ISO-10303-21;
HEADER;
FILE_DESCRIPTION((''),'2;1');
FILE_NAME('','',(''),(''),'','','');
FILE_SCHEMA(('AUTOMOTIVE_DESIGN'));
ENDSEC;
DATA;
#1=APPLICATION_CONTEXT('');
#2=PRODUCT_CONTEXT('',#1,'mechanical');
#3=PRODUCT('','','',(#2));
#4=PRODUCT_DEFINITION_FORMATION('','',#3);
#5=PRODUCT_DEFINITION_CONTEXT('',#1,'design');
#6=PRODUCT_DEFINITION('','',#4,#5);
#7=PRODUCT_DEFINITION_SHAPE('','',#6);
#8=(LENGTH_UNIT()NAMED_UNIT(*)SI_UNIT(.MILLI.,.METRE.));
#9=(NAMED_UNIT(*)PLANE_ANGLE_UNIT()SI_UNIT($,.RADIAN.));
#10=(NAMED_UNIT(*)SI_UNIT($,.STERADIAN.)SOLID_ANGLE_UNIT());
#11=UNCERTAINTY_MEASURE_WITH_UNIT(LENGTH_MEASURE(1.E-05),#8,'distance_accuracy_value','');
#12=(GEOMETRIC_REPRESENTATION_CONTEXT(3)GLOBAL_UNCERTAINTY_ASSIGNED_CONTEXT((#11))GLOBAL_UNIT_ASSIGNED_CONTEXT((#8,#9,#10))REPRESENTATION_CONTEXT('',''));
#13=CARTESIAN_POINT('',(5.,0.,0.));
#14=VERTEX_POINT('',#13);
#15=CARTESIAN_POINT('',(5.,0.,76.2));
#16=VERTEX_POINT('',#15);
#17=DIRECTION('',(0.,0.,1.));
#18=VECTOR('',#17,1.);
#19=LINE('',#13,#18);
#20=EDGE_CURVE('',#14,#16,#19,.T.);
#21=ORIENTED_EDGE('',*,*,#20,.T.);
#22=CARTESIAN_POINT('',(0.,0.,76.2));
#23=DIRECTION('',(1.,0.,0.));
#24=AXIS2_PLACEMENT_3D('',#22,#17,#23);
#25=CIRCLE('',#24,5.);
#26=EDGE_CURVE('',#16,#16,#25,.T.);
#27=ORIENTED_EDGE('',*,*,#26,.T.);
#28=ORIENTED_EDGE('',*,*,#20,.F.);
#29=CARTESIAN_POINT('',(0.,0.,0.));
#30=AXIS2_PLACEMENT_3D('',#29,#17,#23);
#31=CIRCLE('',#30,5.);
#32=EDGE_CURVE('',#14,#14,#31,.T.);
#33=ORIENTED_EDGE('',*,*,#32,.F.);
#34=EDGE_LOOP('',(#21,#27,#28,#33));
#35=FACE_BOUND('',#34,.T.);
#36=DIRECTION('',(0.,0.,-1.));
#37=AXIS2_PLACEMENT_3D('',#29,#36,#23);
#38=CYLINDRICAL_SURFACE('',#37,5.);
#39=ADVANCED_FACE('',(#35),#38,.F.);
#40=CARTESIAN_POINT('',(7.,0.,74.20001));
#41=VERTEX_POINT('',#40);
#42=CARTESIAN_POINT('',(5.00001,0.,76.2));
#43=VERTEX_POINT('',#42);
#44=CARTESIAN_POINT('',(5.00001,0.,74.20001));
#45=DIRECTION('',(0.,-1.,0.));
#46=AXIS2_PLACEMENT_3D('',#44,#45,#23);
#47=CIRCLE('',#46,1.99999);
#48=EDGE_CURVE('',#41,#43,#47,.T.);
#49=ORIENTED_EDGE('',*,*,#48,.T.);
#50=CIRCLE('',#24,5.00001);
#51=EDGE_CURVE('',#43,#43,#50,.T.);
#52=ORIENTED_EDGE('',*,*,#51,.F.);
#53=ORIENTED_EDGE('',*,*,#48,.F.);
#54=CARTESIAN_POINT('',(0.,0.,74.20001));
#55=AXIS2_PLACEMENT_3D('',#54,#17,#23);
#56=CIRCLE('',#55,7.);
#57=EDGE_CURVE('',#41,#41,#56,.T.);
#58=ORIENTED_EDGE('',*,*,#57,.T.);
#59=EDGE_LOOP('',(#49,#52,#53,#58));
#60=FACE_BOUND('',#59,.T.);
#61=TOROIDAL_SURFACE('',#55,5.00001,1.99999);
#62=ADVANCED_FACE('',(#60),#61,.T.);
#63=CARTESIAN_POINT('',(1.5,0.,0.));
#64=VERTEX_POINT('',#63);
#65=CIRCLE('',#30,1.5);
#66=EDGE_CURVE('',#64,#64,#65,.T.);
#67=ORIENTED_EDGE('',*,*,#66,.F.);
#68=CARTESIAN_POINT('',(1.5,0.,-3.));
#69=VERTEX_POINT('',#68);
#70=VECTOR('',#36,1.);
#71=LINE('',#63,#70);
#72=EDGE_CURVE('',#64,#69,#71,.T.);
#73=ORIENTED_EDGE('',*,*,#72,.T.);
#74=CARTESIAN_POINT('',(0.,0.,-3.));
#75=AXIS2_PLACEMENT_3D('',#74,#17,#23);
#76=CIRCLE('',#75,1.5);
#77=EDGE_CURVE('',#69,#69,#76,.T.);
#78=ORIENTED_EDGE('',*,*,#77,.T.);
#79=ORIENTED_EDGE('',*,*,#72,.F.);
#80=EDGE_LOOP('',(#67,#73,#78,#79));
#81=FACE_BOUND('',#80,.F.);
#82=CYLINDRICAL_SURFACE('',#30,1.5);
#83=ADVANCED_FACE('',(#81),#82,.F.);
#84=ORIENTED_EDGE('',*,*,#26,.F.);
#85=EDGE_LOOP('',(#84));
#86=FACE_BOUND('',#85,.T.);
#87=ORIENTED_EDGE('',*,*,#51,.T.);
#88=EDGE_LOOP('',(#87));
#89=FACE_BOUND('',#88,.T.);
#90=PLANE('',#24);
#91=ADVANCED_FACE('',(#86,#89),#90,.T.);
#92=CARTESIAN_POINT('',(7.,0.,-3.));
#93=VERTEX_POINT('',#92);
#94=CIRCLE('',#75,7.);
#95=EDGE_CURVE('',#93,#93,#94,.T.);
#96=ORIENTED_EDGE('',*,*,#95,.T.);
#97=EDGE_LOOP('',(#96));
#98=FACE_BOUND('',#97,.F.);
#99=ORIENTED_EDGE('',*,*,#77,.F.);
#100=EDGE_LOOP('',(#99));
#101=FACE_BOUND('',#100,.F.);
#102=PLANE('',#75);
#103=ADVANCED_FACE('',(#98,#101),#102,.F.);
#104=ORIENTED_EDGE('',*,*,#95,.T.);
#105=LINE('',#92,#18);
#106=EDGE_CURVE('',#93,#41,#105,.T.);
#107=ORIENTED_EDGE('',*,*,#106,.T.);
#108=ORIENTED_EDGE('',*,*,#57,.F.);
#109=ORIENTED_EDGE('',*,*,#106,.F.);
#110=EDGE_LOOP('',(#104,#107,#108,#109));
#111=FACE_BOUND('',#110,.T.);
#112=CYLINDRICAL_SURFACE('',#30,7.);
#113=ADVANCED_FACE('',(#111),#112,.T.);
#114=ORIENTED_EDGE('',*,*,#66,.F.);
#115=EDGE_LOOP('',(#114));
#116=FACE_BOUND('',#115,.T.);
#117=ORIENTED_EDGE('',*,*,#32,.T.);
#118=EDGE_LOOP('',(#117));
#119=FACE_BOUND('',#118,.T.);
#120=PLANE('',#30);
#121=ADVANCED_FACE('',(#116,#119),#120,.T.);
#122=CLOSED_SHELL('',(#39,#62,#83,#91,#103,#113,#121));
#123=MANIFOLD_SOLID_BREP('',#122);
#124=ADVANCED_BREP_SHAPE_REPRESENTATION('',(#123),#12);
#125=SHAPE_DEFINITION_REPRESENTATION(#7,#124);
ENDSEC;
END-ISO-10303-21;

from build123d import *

# Parameters (mm, degrees)
F0_R     = 7
F0_R_2   = 5
F1_DEPTH = 76.2
F0_R_3   = 1.5
F2_DEPTH = 3
F3_R     = 1.99999


# Not quite as in the source:
# - a fillet or chamfer is up to 0.001 mm smaller than in the source, because OpenCascade refuses the exact size


with BuildPart() as f1:
    # F0 (on Top) → F1 (new body)
    with BuildSketch(Plane.XY):
        Circle(F0_R)
        Circle(F0_R_2, mode=Mode.SUBTRACT)
    extrude(amount=F1_DEPTH)

    # F0 (on Top) → F2 (join)
    with BuildSketch(Plane.XY):
        Circle(F0_R)
        Circle(F0_R_2, mode=Mode.SUBTRACT)
        Circle(F0_R_2)
        Circle(F0_R_3, mode=Mode.SUBTRACT)
    extrude(amount=-F2_DEPTH)

    # F3 (radius 2 in the source; OpenCascade refuses exactly that, so slightly less here)
    f3_edges = [f1.edges().sort_by_distance(p)[0] for p in [
        (-7, 0, 76.2),
    ]]
    fillet(f3_edges, radius=F3_R)


solid = f1.part
